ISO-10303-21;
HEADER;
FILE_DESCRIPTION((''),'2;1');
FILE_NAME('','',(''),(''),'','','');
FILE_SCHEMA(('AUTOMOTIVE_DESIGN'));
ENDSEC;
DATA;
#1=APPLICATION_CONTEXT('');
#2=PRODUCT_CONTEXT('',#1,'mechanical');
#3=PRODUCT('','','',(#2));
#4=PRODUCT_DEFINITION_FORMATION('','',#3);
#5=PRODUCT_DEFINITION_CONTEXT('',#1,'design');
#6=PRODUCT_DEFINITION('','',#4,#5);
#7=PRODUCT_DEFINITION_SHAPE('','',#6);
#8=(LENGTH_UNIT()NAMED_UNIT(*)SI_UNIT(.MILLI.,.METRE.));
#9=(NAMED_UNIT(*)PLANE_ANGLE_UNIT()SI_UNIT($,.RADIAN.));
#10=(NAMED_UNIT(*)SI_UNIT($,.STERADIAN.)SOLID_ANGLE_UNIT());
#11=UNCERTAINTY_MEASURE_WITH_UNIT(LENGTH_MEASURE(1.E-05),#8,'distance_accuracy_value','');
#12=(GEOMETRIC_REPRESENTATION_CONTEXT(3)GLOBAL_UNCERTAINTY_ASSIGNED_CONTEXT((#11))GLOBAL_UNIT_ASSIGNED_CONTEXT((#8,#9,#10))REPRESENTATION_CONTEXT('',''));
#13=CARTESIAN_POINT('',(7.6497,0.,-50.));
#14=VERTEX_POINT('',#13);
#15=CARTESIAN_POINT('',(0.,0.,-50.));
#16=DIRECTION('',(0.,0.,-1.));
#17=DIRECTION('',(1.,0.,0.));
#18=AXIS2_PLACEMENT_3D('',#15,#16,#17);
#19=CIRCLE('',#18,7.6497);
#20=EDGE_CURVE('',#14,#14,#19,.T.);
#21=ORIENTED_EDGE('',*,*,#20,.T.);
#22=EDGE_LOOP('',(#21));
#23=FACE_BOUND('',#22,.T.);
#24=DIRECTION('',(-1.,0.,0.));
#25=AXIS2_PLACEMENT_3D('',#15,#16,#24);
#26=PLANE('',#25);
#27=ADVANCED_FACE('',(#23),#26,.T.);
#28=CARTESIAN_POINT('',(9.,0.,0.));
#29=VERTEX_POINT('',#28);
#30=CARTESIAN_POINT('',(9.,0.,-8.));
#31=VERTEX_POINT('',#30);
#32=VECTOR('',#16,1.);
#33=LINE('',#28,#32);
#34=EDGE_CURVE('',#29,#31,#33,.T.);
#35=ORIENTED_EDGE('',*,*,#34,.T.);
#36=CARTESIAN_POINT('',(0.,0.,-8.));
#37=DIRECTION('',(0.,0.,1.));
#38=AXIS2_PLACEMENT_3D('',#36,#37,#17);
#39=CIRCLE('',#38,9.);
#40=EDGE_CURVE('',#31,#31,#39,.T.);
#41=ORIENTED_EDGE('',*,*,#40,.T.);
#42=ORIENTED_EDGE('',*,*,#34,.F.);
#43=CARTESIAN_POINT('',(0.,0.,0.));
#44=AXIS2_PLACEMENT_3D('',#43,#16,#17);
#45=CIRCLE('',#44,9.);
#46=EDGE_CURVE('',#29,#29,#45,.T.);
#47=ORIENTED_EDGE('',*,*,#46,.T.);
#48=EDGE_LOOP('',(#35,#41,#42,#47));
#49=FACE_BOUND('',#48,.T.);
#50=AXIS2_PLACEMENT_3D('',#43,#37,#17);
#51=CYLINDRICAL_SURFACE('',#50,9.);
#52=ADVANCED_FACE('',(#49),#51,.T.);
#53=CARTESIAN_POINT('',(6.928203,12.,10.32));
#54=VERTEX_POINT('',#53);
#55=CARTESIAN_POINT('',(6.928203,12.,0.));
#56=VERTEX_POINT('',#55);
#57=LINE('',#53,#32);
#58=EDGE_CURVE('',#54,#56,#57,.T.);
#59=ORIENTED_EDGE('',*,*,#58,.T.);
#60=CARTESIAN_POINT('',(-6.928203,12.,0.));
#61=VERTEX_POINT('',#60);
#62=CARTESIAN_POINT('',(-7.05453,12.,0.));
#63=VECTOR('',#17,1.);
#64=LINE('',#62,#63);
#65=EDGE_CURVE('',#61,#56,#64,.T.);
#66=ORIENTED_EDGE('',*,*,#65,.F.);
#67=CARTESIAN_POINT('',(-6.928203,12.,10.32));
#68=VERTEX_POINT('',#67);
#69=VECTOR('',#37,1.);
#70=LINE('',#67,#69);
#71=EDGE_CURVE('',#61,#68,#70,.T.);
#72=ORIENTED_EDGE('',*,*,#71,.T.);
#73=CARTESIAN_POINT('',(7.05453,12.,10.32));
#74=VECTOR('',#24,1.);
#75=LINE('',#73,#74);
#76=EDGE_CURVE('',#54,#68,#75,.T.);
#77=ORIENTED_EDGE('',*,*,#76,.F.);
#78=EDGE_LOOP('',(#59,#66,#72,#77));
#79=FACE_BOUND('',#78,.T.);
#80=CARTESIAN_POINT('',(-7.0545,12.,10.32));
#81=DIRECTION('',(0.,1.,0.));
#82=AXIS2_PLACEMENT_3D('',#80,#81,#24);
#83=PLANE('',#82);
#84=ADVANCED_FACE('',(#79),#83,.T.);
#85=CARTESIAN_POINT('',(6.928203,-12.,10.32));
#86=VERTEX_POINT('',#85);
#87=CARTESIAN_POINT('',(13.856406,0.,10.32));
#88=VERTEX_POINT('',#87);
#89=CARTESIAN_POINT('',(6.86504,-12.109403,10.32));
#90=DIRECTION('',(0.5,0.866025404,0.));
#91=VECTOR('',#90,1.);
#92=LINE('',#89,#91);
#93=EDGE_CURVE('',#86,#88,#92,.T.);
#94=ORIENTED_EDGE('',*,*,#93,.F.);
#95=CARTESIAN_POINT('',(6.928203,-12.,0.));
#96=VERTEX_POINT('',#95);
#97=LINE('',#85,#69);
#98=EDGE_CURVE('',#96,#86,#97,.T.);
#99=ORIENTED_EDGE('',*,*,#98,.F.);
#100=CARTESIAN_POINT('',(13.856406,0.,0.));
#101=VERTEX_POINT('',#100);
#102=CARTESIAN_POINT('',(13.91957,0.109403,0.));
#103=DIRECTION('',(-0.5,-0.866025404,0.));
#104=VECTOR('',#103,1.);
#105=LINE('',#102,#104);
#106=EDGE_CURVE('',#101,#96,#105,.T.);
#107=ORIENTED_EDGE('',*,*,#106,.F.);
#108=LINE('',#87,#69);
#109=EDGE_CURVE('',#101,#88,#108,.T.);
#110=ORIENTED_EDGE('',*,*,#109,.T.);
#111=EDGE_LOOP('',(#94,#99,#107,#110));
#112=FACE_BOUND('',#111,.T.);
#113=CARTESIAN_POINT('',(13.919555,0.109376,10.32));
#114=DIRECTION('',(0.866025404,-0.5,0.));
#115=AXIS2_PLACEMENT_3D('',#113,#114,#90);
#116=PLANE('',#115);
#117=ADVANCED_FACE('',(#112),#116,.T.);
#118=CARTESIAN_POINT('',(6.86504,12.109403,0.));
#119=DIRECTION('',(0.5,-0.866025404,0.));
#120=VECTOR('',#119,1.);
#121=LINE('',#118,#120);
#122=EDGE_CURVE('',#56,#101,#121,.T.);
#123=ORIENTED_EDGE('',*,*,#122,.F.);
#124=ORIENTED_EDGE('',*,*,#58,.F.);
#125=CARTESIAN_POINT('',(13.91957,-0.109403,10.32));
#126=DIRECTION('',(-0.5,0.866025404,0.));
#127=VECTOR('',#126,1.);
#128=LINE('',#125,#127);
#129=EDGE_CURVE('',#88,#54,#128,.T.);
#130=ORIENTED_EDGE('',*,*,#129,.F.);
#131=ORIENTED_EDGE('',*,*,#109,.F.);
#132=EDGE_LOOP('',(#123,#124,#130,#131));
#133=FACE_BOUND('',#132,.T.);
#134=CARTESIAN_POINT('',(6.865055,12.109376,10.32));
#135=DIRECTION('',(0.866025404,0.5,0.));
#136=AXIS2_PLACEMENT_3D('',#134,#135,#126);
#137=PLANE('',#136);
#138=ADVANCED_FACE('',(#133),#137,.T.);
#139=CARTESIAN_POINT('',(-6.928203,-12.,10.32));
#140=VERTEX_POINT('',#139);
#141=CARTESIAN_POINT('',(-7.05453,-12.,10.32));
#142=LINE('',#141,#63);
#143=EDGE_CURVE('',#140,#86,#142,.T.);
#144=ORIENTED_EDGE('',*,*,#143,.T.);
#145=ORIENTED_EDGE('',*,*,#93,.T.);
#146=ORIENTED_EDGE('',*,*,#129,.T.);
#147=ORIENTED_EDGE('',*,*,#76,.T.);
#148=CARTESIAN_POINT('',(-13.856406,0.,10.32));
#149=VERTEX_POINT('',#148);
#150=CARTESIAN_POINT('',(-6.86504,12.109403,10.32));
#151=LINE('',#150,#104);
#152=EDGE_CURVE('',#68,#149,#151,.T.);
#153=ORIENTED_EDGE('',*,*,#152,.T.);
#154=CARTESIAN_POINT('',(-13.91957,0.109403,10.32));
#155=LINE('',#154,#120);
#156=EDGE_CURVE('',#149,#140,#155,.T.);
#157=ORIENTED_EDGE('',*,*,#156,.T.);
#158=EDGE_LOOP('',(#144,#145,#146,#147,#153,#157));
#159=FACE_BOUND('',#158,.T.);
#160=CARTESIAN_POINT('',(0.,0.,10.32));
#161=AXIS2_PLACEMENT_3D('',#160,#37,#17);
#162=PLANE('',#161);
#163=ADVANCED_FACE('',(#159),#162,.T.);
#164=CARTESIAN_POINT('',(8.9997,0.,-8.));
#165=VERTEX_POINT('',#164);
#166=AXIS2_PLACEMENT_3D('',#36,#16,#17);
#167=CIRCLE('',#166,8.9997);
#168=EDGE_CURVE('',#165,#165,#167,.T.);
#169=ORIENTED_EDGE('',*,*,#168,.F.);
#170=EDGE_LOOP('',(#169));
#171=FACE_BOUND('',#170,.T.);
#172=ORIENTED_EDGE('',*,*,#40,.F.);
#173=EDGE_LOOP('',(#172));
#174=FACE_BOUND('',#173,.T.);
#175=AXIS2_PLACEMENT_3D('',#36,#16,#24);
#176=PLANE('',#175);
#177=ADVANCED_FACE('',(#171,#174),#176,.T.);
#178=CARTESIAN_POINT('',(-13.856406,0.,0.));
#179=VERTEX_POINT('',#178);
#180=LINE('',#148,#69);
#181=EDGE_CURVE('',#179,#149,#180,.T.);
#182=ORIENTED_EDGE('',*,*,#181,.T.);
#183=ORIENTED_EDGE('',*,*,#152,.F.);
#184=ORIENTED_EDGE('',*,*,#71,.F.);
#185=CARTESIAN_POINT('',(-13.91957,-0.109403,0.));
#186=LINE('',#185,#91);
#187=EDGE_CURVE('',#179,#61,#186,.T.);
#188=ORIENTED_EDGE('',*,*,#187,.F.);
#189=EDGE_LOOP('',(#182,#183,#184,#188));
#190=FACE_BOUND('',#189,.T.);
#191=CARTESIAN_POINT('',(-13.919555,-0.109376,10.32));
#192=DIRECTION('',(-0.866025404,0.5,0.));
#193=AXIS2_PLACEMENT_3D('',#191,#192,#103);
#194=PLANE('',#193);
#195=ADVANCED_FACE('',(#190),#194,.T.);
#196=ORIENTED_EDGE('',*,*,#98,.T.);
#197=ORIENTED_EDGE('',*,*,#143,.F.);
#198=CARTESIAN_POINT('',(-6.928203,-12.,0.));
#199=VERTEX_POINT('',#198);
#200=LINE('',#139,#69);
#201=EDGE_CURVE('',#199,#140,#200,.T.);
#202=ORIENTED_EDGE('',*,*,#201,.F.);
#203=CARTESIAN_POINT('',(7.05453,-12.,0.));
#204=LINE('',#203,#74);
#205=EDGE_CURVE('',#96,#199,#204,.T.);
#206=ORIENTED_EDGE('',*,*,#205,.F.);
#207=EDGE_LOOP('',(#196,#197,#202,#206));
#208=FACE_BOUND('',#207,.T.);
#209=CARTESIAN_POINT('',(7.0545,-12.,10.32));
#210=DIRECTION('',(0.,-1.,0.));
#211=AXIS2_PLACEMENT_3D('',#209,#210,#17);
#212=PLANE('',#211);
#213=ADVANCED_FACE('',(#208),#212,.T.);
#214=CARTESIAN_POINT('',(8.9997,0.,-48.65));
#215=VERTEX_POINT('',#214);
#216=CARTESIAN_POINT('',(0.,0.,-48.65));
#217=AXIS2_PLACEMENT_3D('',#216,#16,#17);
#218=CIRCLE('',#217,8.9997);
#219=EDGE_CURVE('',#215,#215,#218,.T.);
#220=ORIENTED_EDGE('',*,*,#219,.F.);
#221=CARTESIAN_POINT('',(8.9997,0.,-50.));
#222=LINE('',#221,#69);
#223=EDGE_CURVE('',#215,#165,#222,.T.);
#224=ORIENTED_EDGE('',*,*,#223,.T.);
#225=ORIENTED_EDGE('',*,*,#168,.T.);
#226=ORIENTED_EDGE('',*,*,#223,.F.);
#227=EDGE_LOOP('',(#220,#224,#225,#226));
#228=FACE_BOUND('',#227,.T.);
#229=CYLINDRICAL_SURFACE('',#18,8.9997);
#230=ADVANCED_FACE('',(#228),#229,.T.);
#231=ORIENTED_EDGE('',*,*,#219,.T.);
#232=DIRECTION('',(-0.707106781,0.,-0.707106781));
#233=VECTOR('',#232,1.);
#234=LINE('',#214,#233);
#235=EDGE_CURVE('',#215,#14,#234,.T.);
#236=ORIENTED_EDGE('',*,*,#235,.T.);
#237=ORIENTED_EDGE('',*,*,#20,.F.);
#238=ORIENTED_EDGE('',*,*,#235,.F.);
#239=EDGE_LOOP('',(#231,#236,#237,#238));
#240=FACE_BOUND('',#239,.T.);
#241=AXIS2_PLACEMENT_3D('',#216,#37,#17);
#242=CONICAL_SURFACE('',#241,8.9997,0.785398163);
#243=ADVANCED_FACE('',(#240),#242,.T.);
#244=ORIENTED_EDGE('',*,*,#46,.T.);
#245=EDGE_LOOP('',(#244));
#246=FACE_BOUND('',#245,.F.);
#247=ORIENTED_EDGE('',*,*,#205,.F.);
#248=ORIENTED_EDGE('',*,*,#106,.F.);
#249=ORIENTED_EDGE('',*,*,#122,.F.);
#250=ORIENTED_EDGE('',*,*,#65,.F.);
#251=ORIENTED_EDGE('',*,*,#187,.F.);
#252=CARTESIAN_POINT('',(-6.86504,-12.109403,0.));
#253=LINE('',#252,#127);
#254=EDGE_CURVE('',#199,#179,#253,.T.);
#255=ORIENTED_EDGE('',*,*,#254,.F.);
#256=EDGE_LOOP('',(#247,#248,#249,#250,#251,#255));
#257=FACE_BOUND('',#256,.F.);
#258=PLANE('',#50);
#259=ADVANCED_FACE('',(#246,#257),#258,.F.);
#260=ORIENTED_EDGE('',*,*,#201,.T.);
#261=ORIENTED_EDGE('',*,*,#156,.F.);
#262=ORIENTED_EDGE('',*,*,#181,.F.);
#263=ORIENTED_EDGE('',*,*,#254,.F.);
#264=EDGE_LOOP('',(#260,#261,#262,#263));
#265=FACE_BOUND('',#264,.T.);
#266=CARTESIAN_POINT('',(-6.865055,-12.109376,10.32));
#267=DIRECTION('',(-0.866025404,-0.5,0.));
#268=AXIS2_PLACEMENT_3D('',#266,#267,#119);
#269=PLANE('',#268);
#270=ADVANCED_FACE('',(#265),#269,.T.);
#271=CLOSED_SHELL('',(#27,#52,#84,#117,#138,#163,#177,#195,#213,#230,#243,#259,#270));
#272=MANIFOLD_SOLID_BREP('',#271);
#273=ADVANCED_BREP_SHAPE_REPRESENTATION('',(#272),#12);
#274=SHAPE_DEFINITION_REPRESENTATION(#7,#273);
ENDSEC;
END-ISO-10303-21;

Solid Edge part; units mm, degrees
sketch "Sketch1" plane through (0, 0, 0) normal (0, 0, 1) x (1, 0, 0)
  circle A0 centre (0, 0) radius 13.92
  dimension "D1" = 27.84
extrude "Protrusion1" add sketch "Sketch1" along normal blind 10.32
sketch "Sketch2" plane through (0, 0, 0) normal (0, 0, -1) x (1, 0, 0)
  circle A0 centre (0, 0) radius 9
extrude "Protrusion2" add sketch "Sketch2" along normal blind 50
sketch "Sketch3" plane through (0, 0, -50) normal (0, 0, -1) x (1, 0, 0)
  circle A0 centre (0, 0) radius 8.9997
extrude "Cutout1" cut sketch "Sketch3" against normal blind 42 flip side to cut
chamfer "Chamfer_1" distance 1.35 angle 45 1 edges at (-8.9997, 0, -50)
sketch "Sketch4" plane through (0, 0, 10.32) normal (0, 0, 1) x (1, 0, 0)
  line L0 (-7.0545, 12) -> (7.0545, 12)
  dimension "D1" = 24
extrude "Cutout2" cut sketch "Sketch4" against normal up to next material side at (0, 12.05, 10.32)
pattern_circular "Pattern1" count 6 over 360 about axis through (0, 0, 10.32) along (0, 0, 1) of "Cutout2"
properties part number "109109"
